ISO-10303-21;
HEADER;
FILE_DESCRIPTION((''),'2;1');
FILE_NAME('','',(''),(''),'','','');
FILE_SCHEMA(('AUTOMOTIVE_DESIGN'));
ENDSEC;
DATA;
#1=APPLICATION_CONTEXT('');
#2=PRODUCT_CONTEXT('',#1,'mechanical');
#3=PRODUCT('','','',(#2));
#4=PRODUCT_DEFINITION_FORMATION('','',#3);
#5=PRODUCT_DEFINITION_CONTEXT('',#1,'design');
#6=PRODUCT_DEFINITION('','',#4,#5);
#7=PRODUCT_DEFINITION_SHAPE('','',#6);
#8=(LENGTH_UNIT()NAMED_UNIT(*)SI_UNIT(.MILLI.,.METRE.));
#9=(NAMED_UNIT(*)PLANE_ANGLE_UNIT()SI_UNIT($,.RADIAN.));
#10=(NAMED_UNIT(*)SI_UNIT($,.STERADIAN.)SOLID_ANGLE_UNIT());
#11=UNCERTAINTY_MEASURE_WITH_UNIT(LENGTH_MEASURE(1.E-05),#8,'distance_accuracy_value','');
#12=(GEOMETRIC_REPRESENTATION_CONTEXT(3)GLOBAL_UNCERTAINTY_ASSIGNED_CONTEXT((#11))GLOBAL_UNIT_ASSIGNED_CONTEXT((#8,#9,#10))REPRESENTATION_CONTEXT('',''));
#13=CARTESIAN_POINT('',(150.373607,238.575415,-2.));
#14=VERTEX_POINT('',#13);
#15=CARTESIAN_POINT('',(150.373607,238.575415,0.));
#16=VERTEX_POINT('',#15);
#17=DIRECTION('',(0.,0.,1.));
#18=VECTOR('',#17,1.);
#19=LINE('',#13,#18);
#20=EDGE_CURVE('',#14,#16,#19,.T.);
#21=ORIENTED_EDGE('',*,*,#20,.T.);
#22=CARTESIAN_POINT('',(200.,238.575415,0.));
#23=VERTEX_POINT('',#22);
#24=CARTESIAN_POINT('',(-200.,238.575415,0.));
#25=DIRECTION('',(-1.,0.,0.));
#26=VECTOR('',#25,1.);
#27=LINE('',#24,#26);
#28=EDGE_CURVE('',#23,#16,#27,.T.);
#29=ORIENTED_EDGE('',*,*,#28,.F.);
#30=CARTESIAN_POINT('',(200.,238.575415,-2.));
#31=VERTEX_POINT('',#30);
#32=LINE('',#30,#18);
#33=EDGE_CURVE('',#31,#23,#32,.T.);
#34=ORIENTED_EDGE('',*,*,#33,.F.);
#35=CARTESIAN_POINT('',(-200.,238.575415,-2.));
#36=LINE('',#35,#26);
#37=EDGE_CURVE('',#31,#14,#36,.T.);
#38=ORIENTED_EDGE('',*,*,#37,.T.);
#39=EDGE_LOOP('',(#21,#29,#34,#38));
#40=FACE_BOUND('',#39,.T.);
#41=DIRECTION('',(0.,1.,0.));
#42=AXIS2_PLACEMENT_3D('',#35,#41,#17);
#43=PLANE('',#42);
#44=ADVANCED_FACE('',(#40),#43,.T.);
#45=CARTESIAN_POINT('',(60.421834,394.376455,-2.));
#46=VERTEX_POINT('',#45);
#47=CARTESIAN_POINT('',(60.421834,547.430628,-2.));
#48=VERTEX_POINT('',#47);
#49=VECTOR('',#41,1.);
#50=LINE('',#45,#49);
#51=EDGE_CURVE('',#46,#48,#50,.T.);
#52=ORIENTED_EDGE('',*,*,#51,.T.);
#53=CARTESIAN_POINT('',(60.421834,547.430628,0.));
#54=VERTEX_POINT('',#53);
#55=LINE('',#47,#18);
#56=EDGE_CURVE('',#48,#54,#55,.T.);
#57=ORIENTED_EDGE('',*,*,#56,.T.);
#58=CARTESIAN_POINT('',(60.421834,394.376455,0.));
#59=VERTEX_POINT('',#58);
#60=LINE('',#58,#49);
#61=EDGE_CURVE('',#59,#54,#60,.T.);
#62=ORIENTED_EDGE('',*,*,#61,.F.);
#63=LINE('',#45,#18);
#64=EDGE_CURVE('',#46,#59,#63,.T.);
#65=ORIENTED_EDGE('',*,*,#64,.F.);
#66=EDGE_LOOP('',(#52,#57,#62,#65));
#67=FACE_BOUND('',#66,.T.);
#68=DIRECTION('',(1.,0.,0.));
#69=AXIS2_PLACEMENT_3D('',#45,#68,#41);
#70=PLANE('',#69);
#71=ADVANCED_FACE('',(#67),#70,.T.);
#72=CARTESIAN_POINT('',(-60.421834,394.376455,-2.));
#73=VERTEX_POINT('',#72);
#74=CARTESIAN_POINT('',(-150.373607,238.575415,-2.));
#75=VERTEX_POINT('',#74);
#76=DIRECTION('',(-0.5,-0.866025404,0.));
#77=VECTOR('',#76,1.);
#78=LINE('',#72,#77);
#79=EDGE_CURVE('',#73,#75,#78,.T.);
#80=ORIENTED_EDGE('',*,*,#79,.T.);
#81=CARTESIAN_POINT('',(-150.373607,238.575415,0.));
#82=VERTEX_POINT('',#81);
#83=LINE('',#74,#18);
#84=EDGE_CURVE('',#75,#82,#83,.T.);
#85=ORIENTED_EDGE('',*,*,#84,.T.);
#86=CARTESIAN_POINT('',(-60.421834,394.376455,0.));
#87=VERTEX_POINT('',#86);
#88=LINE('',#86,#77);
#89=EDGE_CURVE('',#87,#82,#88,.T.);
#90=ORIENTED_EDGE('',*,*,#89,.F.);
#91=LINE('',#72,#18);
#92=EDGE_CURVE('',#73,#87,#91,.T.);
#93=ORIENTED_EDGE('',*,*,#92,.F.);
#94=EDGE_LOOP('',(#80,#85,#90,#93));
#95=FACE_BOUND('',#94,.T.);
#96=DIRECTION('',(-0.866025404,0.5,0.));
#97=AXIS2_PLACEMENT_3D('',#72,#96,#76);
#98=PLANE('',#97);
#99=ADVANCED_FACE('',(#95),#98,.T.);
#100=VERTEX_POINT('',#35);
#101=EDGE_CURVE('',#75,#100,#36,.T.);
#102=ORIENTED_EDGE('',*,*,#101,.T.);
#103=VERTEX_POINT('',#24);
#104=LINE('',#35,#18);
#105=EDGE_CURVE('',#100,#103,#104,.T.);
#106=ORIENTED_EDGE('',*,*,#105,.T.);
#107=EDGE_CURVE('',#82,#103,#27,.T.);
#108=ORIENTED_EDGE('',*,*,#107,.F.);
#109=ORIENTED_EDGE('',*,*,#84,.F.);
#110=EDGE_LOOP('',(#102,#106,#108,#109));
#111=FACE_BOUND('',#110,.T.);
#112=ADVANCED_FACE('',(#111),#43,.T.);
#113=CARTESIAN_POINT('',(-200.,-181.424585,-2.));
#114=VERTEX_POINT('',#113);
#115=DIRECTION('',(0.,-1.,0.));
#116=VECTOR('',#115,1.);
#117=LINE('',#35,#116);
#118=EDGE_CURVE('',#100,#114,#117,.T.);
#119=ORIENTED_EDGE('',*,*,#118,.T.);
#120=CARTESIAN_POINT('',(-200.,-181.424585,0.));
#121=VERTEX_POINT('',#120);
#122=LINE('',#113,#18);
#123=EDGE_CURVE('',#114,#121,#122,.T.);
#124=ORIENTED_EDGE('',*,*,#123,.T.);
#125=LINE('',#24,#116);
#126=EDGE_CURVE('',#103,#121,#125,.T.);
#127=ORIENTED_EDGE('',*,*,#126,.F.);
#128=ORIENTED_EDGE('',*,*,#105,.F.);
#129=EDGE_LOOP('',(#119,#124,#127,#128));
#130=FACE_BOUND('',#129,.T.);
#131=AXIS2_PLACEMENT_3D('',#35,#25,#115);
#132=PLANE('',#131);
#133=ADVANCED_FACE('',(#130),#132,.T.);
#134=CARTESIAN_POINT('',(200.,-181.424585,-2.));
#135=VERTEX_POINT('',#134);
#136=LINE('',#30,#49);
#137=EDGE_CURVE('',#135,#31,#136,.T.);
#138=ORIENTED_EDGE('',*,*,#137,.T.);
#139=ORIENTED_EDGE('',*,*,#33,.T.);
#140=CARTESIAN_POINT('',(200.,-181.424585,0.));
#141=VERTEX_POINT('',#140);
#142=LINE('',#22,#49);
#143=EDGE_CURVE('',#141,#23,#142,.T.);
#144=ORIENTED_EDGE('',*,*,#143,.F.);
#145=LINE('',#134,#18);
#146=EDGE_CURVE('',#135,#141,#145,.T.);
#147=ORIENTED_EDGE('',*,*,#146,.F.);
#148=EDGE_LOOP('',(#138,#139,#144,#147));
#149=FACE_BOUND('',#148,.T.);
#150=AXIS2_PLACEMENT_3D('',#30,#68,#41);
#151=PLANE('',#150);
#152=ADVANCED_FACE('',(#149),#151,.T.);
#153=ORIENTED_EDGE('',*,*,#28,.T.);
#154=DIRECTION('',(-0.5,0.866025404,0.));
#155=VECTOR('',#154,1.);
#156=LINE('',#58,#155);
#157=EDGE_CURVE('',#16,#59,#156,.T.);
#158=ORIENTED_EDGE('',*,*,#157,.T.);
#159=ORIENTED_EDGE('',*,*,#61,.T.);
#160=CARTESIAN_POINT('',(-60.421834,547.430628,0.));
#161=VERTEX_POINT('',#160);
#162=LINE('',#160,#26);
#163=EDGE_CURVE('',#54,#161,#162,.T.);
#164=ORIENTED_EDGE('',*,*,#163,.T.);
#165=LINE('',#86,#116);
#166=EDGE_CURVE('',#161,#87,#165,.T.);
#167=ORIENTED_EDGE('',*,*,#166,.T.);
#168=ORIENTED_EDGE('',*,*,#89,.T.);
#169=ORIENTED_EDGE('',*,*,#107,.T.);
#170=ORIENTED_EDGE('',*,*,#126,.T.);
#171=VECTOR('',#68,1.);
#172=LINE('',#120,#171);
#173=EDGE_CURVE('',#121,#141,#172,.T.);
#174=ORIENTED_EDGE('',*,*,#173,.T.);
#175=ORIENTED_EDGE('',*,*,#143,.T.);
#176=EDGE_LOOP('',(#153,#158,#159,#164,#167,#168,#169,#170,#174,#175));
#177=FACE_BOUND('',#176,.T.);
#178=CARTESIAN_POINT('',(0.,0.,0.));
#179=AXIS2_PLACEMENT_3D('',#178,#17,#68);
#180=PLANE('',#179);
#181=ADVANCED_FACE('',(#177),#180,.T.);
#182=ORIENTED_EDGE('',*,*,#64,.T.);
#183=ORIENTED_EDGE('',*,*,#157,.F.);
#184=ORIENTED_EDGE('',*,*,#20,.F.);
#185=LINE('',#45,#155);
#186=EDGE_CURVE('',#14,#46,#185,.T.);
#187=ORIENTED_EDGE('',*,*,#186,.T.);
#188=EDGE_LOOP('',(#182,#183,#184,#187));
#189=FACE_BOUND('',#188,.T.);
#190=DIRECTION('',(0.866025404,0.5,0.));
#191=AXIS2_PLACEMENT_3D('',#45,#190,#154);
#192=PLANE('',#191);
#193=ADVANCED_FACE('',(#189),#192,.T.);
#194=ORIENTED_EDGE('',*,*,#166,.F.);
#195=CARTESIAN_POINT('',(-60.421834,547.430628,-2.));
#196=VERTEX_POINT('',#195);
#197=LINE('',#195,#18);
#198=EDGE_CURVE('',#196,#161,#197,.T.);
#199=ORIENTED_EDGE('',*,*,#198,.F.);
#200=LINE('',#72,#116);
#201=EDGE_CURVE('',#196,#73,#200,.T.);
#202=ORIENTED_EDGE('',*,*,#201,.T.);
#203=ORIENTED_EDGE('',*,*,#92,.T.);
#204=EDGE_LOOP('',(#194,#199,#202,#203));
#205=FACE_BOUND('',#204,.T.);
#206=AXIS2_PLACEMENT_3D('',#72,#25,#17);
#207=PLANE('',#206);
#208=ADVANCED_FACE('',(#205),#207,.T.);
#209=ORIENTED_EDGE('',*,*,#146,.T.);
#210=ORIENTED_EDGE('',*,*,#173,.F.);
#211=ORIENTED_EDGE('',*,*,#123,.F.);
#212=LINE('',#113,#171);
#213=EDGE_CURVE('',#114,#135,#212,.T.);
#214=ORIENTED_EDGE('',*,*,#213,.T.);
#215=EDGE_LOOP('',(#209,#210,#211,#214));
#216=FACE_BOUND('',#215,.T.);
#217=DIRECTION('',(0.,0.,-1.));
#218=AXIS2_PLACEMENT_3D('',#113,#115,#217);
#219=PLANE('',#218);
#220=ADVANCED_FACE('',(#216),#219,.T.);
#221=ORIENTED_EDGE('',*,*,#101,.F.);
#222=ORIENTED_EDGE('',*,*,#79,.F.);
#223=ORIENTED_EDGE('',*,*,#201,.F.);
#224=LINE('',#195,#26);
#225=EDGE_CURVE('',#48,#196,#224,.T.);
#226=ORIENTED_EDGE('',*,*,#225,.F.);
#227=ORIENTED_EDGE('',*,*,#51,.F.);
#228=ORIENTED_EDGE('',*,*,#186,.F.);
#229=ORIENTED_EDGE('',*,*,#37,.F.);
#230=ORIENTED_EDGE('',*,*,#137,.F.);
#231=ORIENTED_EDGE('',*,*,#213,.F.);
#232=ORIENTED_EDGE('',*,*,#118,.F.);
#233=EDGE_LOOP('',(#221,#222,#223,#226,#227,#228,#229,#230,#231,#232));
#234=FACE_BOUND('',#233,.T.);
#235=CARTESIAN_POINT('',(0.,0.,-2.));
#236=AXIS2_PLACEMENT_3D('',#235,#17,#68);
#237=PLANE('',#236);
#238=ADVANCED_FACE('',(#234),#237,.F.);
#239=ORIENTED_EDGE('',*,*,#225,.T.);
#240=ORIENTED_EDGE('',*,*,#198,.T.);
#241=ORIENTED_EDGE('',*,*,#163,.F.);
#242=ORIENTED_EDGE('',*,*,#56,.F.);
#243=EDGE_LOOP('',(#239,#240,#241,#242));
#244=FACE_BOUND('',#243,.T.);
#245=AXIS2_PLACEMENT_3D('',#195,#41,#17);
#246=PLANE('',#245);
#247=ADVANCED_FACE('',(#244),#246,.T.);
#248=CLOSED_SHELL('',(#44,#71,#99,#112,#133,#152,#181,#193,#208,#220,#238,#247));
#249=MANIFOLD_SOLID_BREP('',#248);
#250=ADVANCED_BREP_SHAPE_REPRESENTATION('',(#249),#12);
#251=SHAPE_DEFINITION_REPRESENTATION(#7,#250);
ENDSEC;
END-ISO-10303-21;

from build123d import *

# Parameters (mm, degrees)
SKETCH2_W          = 400
SKETCH2_H          = 420
BASE_FLANGE1_DEPTH = 2
TAB1_DEPTH         = 2


# Sheet-metal steps are written as plain solids
with BuildPart() as part:
    # Sketch2 → Base-Flange1 (new body)
    with BuildSketch(Plane.XY):
        with Locations((0, 28.575414969)):
            Rectangle(SKETCH2_W, SKETCH2_H)
    extrude(amount=-BASE_FLANGE1_DEPTH)

    # Sketch5 → Tab1 (add)
    with BuildSketch(Plane.XY):
        Polygon((-60.421834446, 394.376455492), (-60.421834446, 547.430628062), (60.421834446, 547.430628062), (60.421834446, 394.376455492), (150.373607132, 238.575414969), (-150.373607132, 238.575414969), align=None)
    extrude(amount=-TAB1_DEPTH)


solid = part.part
